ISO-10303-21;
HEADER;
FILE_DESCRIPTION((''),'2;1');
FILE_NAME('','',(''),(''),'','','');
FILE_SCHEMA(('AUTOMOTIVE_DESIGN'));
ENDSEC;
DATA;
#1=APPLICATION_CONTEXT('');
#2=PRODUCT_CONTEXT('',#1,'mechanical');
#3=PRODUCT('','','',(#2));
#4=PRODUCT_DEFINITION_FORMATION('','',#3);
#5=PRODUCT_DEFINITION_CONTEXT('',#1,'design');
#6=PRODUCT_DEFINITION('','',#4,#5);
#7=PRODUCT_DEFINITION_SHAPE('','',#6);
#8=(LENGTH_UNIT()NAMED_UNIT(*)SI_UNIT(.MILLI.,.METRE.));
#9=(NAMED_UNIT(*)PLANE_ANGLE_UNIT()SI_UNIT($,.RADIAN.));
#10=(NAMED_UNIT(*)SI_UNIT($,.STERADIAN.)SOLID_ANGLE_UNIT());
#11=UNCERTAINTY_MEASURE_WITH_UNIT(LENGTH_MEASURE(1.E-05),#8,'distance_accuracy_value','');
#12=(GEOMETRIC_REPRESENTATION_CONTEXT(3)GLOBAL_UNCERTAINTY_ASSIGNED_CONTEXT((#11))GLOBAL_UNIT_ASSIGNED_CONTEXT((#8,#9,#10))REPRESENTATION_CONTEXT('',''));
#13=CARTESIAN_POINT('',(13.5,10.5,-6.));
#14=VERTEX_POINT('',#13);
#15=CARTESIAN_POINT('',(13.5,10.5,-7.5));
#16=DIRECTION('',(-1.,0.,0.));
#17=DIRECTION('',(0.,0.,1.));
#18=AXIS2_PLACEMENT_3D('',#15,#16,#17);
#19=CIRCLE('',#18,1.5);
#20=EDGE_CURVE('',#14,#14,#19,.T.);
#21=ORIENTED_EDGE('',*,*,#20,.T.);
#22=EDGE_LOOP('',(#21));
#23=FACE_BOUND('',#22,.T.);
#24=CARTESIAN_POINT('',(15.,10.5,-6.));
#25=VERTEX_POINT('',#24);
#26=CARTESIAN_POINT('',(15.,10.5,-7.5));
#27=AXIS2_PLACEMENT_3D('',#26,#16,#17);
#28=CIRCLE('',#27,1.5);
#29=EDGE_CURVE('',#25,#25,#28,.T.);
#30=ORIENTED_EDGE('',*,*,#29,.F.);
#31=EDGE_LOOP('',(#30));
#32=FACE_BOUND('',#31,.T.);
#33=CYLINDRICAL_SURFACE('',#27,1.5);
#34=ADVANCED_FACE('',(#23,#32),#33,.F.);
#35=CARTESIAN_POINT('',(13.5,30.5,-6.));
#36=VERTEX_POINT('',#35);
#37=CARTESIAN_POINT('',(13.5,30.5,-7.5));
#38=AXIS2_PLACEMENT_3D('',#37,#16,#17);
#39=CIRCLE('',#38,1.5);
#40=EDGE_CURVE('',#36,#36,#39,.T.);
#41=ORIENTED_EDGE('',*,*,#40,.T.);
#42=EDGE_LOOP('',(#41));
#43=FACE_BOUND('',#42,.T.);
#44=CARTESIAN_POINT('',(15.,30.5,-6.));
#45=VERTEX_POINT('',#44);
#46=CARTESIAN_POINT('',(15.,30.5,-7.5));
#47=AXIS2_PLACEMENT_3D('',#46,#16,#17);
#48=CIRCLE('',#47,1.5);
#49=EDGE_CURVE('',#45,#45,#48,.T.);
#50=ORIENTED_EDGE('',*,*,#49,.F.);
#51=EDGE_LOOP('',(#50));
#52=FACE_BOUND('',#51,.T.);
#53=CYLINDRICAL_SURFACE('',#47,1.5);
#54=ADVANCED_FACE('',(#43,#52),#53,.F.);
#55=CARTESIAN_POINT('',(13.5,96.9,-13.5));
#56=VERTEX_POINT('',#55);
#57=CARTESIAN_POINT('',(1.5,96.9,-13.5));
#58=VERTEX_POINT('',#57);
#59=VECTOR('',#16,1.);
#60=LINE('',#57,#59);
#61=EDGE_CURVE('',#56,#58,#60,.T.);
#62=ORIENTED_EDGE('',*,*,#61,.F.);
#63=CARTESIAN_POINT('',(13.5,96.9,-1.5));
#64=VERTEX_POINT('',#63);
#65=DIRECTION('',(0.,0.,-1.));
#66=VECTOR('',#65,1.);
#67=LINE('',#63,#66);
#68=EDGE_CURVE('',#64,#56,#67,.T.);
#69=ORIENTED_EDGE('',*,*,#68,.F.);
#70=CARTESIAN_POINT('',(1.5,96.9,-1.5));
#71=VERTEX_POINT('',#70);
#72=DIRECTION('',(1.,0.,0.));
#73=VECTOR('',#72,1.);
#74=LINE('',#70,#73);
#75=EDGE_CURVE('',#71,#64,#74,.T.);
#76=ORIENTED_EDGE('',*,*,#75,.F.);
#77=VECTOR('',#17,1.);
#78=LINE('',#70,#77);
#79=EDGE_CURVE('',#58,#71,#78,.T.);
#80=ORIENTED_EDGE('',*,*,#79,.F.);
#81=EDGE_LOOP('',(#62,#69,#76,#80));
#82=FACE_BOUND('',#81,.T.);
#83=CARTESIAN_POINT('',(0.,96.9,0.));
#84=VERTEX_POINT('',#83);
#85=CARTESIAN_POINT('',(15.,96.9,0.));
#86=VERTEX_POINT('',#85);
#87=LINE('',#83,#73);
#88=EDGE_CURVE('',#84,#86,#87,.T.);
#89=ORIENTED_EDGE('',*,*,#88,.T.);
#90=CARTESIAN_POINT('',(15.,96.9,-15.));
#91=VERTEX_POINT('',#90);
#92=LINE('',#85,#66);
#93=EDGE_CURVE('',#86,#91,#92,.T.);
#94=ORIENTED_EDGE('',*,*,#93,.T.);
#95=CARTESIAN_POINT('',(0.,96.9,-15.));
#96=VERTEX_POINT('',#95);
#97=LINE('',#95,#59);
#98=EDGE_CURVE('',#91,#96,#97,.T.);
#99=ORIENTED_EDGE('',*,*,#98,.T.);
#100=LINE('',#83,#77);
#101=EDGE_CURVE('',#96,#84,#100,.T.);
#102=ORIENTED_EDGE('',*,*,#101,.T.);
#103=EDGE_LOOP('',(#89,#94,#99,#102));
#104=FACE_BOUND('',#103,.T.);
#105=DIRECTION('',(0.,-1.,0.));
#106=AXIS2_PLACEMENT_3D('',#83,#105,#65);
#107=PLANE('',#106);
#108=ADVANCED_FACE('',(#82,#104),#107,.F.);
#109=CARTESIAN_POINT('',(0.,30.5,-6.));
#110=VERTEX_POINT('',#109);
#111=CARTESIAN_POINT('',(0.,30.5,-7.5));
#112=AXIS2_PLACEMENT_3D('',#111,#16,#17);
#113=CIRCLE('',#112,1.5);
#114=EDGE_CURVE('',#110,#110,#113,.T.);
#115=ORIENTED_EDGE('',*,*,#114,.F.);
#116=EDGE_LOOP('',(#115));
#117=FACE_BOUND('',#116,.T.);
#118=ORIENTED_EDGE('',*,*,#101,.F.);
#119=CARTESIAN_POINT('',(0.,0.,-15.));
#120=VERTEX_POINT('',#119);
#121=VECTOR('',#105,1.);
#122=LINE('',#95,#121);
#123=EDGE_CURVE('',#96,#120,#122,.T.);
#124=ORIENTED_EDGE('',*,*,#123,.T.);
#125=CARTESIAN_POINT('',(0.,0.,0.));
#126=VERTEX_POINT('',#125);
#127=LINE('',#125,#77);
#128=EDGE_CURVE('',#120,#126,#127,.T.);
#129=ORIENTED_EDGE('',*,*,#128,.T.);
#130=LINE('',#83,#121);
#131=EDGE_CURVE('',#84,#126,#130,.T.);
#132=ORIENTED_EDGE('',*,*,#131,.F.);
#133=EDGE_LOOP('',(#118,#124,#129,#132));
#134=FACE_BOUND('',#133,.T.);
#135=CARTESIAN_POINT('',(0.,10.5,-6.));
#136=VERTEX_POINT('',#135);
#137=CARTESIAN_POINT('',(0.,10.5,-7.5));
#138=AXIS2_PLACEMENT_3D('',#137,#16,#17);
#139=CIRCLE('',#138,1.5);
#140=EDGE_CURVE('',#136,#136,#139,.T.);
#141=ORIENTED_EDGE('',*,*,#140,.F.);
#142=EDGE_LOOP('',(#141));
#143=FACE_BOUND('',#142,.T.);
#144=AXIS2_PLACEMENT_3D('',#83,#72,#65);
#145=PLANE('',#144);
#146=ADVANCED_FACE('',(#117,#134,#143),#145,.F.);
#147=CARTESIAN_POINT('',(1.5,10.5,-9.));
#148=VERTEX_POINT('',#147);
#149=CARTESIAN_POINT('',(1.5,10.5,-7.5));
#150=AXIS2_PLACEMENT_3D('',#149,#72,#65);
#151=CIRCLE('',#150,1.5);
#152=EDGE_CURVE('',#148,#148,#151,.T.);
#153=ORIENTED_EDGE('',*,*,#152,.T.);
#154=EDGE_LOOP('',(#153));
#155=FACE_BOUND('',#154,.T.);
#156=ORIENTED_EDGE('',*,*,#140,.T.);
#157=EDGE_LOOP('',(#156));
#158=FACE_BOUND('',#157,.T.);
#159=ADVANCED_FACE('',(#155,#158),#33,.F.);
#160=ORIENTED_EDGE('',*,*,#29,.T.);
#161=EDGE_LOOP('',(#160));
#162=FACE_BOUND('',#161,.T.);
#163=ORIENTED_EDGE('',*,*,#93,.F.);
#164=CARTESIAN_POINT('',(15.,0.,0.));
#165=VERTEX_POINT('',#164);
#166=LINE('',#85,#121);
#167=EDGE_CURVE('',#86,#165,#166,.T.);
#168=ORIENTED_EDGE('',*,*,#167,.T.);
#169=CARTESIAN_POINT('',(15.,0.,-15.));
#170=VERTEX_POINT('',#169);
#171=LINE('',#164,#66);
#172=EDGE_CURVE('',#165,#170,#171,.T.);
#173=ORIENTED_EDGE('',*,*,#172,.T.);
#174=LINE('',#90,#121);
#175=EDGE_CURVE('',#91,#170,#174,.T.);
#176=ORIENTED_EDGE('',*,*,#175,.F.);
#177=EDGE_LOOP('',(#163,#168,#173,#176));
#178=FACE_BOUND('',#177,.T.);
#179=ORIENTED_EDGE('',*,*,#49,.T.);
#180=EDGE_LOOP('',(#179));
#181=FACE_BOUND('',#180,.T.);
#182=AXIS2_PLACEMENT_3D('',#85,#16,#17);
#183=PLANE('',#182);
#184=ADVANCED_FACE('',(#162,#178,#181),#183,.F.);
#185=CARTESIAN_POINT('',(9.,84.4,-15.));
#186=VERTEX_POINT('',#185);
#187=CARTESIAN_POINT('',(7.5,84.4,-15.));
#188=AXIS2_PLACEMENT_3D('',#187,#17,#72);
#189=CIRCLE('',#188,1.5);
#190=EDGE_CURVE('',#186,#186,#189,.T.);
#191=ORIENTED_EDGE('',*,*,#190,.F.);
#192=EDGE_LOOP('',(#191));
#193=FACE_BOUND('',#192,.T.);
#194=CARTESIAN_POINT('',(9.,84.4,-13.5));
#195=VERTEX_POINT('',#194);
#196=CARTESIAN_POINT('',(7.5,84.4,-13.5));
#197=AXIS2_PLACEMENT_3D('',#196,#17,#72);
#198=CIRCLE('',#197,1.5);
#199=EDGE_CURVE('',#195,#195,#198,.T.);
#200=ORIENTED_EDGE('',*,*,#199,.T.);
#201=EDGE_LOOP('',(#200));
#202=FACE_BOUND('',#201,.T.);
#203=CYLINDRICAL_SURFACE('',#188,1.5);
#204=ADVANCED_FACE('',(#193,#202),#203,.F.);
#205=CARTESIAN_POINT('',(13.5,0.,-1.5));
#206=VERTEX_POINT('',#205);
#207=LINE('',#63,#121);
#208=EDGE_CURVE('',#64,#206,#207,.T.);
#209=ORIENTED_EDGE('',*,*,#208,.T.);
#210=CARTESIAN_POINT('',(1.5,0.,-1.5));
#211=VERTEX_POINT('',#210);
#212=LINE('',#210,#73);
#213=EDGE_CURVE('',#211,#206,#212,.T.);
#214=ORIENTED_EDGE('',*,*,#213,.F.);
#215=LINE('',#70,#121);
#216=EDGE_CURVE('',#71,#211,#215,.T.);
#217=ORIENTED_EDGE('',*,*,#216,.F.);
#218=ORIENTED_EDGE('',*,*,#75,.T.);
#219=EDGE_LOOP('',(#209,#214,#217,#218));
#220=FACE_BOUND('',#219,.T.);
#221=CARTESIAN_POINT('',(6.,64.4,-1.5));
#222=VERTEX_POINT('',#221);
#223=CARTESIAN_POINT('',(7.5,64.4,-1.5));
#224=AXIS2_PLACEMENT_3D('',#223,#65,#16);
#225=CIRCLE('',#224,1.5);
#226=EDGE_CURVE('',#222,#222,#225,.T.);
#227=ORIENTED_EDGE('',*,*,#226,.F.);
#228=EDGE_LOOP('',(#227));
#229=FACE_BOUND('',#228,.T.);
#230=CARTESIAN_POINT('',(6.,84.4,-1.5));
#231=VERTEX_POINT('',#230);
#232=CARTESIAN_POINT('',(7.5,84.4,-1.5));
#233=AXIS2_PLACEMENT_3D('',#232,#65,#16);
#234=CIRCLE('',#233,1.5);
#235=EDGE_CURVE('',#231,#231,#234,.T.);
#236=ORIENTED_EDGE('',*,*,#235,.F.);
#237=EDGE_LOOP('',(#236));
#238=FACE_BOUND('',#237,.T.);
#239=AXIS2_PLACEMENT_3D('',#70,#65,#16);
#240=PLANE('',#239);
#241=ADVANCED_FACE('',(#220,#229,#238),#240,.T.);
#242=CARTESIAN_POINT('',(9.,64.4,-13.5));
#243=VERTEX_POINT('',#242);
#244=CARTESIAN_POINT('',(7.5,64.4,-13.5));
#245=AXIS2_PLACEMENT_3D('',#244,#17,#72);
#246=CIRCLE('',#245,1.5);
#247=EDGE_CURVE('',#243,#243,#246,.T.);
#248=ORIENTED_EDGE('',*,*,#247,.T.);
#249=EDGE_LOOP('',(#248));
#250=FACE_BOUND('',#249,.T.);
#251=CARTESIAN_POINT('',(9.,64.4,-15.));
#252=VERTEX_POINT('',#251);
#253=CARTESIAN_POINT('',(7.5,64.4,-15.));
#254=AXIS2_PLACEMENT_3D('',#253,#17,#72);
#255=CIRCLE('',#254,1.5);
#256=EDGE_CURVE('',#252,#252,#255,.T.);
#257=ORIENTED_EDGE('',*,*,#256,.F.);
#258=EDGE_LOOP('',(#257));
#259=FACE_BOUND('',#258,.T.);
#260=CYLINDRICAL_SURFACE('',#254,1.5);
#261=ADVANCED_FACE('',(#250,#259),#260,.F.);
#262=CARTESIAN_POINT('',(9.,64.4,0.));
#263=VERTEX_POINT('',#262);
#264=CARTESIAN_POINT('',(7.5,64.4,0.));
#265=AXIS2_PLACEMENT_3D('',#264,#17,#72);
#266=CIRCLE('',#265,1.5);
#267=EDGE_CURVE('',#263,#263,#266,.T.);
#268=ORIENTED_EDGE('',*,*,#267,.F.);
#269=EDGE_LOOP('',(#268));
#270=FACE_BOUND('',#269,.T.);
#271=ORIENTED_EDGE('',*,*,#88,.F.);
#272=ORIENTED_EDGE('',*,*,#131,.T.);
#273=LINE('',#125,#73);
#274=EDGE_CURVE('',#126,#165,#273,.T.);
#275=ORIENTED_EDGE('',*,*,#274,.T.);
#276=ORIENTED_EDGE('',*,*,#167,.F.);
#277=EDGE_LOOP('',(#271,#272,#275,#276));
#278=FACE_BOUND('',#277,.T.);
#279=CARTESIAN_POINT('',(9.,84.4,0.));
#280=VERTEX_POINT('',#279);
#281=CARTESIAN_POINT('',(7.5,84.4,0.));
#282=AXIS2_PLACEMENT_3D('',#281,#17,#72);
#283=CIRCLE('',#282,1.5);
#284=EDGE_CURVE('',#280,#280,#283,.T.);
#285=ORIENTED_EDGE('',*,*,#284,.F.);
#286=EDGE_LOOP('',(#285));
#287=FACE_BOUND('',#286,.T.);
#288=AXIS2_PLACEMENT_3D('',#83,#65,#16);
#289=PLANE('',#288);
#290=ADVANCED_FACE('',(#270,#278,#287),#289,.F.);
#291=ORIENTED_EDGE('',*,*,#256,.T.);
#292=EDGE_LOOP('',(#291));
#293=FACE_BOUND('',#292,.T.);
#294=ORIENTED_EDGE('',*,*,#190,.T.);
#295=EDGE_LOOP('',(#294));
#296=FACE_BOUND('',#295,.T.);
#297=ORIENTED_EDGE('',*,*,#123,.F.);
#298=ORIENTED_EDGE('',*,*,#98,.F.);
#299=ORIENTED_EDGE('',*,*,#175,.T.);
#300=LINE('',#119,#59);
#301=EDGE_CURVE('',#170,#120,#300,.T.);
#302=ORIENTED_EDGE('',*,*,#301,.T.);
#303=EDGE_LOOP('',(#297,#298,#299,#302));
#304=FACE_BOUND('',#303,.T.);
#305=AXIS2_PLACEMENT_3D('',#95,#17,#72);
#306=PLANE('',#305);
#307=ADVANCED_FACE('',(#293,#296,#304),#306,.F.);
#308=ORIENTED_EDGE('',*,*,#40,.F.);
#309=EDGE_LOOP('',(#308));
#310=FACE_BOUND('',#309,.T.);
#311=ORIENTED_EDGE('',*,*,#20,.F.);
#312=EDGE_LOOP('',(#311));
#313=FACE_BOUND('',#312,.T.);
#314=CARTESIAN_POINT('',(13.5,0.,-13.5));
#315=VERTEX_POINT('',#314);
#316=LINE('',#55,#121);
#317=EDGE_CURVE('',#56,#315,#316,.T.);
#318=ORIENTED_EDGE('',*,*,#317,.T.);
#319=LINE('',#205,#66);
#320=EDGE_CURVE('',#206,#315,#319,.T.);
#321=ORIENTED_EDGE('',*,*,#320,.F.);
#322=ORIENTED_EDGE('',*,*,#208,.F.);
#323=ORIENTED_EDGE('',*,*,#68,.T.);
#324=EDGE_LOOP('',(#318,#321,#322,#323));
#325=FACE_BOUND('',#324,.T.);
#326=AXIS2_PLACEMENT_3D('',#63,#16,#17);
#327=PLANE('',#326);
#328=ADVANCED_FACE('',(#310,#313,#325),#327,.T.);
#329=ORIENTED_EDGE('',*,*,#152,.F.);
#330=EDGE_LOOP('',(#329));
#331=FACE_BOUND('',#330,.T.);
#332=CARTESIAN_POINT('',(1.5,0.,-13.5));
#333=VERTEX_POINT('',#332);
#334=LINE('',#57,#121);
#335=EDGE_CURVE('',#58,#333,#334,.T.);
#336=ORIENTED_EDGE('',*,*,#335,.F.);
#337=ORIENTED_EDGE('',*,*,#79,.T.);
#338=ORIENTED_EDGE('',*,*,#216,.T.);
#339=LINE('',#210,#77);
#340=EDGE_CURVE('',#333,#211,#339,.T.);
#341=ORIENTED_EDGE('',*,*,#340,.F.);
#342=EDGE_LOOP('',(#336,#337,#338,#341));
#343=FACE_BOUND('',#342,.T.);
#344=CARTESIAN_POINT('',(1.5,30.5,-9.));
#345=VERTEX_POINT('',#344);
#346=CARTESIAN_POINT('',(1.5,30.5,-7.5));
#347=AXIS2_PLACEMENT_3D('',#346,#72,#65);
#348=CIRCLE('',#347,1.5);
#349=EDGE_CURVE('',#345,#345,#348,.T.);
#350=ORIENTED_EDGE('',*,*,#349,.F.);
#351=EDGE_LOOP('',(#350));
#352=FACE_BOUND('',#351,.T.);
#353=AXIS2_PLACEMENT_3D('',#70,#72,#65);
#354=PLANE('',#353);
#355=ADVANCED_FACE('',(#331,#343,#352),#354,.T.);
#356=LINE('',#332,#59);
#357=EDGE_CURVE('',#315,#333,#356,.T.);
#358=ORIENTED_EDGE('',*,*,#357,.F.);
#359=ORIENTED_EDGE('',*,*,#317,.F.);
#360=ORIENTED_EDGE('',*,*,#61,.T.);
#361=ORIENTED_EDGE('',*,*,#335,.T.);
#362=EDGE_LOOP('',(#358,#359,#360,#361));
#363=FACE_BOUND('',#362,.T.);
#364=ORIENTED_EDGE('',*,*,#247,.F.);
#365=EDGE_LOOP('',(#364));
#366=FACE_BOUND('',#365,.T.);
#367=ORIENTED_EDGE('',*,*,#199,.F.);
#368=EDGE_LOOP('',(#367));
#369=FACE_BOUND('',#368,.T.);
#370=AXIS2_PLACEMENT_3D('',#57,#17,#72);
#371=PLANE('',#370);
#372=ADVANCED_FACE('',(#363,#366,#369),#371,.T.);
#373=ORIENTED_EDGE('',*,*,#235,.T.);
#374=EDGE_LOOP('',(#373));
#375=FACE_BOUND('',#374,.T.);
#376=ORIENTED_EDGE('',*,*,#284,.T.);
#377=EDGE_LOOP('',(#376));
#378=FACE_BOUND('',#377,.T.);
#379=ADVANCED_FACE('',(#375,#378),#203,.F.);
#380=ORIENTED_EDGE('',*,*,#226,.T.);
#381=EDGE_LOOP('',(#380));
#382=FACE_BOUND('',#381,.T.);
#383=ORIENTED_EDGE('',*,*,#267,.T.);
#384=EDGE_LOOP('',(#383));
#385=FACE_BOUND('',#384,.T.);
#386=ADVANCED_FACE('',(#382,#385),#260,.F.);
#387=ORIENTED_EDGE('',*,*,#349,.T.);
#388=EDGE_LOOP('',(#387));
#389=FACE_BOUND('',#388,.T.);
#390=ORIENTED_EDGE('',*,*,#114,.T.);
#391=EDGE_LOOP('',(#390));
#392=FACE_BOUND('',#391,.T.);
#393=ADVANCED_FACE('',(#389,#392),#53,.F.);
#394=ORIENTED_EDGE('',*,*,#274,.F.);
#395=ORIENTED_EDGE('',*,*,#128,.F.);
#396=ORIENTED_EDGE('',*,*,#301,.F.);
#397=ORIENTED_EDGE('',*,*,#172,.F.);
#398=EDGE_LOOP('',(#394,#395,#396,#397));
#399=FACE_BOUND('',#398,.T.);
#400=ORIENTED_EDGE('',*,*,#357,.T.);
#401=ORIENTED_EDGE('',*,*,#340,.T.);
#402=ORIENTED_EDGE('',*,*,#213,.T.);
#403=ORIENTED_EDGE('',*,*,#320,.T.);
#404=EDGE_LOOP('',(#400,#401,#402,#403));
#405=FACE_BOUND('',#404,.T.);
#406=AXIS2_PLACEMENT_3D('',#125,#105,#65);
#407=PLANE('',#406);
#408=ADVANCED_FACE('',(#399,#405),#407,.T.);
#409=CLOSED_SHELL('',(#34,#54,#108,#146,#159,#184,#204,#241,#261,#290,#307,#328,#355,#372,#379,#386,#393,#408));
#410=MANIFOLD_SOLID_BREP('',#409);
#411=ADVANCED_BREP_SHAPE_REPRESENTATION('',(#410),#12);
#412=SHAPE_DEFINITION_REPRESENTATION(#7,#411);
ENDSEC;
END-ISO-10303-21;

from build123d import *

# Parameters (mm, degrees)
SKETCH_1_W              = 15
SKETCH_1_H              = 15
SKETCH_1_W_2            = 12
SKETCH_1_H_2            = 12
EXTRUDE_1_DEPTH         = 96.9
SKETCH_2_R              = 1.5
CUT_EXTRUDE_1_DEPTH     = 100.194808332
CUT_EXTRUDE_2_OUTLINE_R = 1.5
CUT_EXTRUDE_2_DEPTH     = 15


# Read off the part's stored shape, not the designer's step: 切除-拉伸2
with BuildPart() as part:
    # 草图1 → 凸台-拉伸1 (new body)
    with BuildSketch(Plane(origin=(0, 0, 0), x_dir=(1, 0, 0), z_dir=(0, 1, 0))):
        with Locations((7.5, 7.5)):
            Rectangle(SKETCH_1_W, SKETCH_1_H)
        with Locations((7.5, 7.5)):
            Rectangle(SKETCH_1_W_2, SKETCH_1_H_2, mode=Mode.SUBTRACT)
    extrude(amount=EXTRUDE_1_DEPTH)

    # 草图2 (on Front Plane) → 切除-拉伸1 (cut, through all)
    with BuildSketch(Plane.XY):
        with Locations((7.5, 64.4)):
            Circle(SKETCH_2_R)
        with Locations((7.5, 84.4)):
            Circle(SKETCH_2_R)
    extrude(amount=-CUT_EXTRUDE_1_DEPTH, mode=Mode.SUBTRACT)

    # 切除-拉伸2 outline → 切除-拉伸2 (cut)
    with BuildSketch(Plane.YZ):
        with Locations((10.5, -7.5)):
            Circle(CUT_EXTRUDE_2_OUTLINE_R)
        with Locations((30.5, -7.5)):
            Circle(CUT_EXTRUDE_2_OUTLINE_R)
    extrude(amount=CUT_EXTRUDE_2_DEPTH, mode=Mode.SUBTRACT)


solid = part.part
